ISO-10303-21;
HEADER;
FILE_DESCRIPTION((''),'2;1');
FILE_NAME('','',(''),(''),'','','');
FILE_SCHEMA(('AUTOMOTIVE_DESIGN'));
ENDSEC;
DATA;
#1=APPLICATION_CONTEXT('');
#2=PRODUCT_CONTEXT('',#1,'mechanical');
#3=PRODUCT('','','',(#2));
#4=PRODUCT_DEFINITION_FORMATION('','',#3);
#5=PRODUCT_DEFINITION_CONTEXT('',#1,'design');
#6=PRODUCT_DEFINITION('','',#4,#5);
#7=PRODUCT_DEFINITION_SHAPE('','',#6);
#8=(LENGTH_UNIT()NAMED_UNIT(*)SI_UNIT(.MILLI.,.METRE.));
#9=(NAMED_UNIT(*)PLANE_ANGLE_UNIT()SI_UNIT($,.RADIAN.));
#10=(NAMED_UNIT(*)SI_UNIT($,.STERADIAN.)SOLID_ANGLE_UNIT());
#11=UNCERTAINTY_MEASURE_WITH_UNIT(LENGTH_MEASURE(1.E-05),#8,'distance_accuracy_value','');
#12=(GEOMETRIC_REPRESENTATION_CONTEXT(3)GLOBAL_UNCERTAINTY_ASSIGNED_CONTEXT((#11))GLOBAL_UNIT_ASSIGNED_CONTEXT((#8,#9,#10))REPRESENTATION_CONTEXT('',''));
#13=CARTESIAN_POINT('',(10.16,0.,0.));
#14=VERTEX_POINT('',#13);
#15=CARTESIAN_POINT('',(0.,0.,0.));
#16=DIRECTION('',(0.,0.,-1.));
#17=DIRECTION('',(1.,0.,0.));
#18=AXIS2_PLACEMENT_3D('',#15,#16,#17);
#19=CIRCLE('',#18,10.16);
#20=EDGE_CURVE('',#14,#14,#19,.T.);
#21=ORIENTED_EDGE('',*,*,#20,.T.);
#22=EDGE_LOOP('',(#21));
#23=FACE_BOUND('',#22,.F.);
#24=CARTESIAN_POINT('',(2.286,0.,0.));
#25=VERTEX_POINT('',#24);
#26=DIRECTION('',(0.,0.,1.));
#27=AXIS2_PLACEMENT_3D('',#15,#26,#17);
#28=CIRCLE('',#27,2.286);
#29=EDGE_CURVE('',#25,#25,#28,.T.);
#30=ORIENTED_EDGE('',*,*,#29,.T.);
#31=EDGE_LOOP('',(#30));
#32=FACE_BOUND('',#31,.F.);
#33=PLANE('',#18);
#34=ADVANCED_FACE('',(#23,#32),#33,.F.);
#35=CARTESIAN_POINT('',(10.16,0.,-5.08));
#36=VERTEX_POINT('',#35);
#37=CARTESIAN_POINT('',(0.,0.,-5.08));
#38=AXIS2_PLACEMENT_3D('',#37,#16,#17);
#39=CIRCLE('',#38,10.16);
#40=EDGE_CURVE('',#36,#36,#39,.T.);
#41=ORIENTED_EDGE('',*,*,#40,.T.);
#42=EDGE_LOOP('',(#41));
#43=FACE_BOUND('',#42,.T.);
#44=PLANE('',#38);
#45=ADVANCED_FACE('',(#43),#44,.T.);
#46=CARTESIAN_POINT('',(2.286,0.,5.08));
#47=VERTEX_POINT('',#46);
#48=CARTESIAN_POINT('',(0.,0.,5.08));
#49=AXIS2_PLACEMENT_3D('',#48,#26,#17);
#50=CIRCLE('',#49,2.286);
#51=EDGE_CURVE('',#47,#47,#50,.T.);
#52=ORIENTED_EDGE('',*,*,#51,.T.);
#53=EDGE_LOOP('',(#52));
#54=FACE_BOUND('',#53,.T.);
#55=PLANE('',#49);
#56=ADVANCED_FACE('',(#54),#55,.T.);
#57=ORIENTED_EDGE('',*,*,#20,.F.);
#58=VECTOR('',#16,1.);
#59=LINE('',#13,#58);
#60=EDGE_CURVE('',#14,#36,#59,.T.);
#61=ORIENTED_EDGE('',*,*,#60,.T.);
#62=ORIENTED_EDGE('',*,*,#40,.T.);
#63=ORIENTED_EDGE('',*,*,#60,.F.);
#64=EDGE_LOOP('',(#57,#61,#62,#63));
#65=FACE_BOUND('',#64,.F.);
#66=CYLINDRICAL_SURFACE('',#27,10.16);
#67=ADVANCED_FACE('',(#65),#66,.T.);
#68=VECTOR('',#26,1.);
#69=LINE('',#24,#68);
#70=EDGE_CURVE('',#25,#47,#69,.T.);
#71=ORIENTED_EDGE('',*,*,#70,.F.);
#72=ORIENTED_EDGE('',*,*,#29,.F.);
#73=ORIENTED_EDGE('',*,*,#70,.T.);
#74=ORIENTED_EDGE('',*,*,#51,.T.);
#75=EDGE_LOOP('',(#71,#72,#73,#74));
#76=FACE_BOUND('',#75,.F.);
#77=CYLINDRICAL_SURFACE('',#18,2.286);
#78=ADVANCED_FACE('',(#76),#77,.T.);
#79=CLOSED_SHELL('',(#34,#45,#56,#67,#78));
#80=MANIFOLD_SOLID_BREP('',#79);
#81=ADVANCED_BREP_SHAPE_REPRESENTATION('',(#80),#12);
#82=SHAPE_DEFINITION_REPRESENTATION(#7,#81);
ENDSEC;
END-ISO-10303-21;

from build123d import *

# Parameters (mm, degrees)
F0_R     = 2.286
F1_DEPTH = 5.08
F2_R     = 10.16
F2_R_2   = 2.286
F3_DEPTH = 5.08


with BuildPart() as f1:
    # F0 (on Top) → F1 (new body)
    with BuildSketch(Plane.XY):
        Circle(F0_R)
    extrude(amount=F1_DEPTH)

    # F2 (on face) → F3 (join)
    with BuildSketch(Plane(origin=(0, 0, 0), x_dir=(1, 0, 0), z_dir=(0, 0, -1))):
        Circle(F2_R)
        Circle(F2_R_2, mode=Mode.SUBTRACT)
        Circle(F2_R_2)
    extrude(amount=F3_DEPTH)


solid = f1.part
